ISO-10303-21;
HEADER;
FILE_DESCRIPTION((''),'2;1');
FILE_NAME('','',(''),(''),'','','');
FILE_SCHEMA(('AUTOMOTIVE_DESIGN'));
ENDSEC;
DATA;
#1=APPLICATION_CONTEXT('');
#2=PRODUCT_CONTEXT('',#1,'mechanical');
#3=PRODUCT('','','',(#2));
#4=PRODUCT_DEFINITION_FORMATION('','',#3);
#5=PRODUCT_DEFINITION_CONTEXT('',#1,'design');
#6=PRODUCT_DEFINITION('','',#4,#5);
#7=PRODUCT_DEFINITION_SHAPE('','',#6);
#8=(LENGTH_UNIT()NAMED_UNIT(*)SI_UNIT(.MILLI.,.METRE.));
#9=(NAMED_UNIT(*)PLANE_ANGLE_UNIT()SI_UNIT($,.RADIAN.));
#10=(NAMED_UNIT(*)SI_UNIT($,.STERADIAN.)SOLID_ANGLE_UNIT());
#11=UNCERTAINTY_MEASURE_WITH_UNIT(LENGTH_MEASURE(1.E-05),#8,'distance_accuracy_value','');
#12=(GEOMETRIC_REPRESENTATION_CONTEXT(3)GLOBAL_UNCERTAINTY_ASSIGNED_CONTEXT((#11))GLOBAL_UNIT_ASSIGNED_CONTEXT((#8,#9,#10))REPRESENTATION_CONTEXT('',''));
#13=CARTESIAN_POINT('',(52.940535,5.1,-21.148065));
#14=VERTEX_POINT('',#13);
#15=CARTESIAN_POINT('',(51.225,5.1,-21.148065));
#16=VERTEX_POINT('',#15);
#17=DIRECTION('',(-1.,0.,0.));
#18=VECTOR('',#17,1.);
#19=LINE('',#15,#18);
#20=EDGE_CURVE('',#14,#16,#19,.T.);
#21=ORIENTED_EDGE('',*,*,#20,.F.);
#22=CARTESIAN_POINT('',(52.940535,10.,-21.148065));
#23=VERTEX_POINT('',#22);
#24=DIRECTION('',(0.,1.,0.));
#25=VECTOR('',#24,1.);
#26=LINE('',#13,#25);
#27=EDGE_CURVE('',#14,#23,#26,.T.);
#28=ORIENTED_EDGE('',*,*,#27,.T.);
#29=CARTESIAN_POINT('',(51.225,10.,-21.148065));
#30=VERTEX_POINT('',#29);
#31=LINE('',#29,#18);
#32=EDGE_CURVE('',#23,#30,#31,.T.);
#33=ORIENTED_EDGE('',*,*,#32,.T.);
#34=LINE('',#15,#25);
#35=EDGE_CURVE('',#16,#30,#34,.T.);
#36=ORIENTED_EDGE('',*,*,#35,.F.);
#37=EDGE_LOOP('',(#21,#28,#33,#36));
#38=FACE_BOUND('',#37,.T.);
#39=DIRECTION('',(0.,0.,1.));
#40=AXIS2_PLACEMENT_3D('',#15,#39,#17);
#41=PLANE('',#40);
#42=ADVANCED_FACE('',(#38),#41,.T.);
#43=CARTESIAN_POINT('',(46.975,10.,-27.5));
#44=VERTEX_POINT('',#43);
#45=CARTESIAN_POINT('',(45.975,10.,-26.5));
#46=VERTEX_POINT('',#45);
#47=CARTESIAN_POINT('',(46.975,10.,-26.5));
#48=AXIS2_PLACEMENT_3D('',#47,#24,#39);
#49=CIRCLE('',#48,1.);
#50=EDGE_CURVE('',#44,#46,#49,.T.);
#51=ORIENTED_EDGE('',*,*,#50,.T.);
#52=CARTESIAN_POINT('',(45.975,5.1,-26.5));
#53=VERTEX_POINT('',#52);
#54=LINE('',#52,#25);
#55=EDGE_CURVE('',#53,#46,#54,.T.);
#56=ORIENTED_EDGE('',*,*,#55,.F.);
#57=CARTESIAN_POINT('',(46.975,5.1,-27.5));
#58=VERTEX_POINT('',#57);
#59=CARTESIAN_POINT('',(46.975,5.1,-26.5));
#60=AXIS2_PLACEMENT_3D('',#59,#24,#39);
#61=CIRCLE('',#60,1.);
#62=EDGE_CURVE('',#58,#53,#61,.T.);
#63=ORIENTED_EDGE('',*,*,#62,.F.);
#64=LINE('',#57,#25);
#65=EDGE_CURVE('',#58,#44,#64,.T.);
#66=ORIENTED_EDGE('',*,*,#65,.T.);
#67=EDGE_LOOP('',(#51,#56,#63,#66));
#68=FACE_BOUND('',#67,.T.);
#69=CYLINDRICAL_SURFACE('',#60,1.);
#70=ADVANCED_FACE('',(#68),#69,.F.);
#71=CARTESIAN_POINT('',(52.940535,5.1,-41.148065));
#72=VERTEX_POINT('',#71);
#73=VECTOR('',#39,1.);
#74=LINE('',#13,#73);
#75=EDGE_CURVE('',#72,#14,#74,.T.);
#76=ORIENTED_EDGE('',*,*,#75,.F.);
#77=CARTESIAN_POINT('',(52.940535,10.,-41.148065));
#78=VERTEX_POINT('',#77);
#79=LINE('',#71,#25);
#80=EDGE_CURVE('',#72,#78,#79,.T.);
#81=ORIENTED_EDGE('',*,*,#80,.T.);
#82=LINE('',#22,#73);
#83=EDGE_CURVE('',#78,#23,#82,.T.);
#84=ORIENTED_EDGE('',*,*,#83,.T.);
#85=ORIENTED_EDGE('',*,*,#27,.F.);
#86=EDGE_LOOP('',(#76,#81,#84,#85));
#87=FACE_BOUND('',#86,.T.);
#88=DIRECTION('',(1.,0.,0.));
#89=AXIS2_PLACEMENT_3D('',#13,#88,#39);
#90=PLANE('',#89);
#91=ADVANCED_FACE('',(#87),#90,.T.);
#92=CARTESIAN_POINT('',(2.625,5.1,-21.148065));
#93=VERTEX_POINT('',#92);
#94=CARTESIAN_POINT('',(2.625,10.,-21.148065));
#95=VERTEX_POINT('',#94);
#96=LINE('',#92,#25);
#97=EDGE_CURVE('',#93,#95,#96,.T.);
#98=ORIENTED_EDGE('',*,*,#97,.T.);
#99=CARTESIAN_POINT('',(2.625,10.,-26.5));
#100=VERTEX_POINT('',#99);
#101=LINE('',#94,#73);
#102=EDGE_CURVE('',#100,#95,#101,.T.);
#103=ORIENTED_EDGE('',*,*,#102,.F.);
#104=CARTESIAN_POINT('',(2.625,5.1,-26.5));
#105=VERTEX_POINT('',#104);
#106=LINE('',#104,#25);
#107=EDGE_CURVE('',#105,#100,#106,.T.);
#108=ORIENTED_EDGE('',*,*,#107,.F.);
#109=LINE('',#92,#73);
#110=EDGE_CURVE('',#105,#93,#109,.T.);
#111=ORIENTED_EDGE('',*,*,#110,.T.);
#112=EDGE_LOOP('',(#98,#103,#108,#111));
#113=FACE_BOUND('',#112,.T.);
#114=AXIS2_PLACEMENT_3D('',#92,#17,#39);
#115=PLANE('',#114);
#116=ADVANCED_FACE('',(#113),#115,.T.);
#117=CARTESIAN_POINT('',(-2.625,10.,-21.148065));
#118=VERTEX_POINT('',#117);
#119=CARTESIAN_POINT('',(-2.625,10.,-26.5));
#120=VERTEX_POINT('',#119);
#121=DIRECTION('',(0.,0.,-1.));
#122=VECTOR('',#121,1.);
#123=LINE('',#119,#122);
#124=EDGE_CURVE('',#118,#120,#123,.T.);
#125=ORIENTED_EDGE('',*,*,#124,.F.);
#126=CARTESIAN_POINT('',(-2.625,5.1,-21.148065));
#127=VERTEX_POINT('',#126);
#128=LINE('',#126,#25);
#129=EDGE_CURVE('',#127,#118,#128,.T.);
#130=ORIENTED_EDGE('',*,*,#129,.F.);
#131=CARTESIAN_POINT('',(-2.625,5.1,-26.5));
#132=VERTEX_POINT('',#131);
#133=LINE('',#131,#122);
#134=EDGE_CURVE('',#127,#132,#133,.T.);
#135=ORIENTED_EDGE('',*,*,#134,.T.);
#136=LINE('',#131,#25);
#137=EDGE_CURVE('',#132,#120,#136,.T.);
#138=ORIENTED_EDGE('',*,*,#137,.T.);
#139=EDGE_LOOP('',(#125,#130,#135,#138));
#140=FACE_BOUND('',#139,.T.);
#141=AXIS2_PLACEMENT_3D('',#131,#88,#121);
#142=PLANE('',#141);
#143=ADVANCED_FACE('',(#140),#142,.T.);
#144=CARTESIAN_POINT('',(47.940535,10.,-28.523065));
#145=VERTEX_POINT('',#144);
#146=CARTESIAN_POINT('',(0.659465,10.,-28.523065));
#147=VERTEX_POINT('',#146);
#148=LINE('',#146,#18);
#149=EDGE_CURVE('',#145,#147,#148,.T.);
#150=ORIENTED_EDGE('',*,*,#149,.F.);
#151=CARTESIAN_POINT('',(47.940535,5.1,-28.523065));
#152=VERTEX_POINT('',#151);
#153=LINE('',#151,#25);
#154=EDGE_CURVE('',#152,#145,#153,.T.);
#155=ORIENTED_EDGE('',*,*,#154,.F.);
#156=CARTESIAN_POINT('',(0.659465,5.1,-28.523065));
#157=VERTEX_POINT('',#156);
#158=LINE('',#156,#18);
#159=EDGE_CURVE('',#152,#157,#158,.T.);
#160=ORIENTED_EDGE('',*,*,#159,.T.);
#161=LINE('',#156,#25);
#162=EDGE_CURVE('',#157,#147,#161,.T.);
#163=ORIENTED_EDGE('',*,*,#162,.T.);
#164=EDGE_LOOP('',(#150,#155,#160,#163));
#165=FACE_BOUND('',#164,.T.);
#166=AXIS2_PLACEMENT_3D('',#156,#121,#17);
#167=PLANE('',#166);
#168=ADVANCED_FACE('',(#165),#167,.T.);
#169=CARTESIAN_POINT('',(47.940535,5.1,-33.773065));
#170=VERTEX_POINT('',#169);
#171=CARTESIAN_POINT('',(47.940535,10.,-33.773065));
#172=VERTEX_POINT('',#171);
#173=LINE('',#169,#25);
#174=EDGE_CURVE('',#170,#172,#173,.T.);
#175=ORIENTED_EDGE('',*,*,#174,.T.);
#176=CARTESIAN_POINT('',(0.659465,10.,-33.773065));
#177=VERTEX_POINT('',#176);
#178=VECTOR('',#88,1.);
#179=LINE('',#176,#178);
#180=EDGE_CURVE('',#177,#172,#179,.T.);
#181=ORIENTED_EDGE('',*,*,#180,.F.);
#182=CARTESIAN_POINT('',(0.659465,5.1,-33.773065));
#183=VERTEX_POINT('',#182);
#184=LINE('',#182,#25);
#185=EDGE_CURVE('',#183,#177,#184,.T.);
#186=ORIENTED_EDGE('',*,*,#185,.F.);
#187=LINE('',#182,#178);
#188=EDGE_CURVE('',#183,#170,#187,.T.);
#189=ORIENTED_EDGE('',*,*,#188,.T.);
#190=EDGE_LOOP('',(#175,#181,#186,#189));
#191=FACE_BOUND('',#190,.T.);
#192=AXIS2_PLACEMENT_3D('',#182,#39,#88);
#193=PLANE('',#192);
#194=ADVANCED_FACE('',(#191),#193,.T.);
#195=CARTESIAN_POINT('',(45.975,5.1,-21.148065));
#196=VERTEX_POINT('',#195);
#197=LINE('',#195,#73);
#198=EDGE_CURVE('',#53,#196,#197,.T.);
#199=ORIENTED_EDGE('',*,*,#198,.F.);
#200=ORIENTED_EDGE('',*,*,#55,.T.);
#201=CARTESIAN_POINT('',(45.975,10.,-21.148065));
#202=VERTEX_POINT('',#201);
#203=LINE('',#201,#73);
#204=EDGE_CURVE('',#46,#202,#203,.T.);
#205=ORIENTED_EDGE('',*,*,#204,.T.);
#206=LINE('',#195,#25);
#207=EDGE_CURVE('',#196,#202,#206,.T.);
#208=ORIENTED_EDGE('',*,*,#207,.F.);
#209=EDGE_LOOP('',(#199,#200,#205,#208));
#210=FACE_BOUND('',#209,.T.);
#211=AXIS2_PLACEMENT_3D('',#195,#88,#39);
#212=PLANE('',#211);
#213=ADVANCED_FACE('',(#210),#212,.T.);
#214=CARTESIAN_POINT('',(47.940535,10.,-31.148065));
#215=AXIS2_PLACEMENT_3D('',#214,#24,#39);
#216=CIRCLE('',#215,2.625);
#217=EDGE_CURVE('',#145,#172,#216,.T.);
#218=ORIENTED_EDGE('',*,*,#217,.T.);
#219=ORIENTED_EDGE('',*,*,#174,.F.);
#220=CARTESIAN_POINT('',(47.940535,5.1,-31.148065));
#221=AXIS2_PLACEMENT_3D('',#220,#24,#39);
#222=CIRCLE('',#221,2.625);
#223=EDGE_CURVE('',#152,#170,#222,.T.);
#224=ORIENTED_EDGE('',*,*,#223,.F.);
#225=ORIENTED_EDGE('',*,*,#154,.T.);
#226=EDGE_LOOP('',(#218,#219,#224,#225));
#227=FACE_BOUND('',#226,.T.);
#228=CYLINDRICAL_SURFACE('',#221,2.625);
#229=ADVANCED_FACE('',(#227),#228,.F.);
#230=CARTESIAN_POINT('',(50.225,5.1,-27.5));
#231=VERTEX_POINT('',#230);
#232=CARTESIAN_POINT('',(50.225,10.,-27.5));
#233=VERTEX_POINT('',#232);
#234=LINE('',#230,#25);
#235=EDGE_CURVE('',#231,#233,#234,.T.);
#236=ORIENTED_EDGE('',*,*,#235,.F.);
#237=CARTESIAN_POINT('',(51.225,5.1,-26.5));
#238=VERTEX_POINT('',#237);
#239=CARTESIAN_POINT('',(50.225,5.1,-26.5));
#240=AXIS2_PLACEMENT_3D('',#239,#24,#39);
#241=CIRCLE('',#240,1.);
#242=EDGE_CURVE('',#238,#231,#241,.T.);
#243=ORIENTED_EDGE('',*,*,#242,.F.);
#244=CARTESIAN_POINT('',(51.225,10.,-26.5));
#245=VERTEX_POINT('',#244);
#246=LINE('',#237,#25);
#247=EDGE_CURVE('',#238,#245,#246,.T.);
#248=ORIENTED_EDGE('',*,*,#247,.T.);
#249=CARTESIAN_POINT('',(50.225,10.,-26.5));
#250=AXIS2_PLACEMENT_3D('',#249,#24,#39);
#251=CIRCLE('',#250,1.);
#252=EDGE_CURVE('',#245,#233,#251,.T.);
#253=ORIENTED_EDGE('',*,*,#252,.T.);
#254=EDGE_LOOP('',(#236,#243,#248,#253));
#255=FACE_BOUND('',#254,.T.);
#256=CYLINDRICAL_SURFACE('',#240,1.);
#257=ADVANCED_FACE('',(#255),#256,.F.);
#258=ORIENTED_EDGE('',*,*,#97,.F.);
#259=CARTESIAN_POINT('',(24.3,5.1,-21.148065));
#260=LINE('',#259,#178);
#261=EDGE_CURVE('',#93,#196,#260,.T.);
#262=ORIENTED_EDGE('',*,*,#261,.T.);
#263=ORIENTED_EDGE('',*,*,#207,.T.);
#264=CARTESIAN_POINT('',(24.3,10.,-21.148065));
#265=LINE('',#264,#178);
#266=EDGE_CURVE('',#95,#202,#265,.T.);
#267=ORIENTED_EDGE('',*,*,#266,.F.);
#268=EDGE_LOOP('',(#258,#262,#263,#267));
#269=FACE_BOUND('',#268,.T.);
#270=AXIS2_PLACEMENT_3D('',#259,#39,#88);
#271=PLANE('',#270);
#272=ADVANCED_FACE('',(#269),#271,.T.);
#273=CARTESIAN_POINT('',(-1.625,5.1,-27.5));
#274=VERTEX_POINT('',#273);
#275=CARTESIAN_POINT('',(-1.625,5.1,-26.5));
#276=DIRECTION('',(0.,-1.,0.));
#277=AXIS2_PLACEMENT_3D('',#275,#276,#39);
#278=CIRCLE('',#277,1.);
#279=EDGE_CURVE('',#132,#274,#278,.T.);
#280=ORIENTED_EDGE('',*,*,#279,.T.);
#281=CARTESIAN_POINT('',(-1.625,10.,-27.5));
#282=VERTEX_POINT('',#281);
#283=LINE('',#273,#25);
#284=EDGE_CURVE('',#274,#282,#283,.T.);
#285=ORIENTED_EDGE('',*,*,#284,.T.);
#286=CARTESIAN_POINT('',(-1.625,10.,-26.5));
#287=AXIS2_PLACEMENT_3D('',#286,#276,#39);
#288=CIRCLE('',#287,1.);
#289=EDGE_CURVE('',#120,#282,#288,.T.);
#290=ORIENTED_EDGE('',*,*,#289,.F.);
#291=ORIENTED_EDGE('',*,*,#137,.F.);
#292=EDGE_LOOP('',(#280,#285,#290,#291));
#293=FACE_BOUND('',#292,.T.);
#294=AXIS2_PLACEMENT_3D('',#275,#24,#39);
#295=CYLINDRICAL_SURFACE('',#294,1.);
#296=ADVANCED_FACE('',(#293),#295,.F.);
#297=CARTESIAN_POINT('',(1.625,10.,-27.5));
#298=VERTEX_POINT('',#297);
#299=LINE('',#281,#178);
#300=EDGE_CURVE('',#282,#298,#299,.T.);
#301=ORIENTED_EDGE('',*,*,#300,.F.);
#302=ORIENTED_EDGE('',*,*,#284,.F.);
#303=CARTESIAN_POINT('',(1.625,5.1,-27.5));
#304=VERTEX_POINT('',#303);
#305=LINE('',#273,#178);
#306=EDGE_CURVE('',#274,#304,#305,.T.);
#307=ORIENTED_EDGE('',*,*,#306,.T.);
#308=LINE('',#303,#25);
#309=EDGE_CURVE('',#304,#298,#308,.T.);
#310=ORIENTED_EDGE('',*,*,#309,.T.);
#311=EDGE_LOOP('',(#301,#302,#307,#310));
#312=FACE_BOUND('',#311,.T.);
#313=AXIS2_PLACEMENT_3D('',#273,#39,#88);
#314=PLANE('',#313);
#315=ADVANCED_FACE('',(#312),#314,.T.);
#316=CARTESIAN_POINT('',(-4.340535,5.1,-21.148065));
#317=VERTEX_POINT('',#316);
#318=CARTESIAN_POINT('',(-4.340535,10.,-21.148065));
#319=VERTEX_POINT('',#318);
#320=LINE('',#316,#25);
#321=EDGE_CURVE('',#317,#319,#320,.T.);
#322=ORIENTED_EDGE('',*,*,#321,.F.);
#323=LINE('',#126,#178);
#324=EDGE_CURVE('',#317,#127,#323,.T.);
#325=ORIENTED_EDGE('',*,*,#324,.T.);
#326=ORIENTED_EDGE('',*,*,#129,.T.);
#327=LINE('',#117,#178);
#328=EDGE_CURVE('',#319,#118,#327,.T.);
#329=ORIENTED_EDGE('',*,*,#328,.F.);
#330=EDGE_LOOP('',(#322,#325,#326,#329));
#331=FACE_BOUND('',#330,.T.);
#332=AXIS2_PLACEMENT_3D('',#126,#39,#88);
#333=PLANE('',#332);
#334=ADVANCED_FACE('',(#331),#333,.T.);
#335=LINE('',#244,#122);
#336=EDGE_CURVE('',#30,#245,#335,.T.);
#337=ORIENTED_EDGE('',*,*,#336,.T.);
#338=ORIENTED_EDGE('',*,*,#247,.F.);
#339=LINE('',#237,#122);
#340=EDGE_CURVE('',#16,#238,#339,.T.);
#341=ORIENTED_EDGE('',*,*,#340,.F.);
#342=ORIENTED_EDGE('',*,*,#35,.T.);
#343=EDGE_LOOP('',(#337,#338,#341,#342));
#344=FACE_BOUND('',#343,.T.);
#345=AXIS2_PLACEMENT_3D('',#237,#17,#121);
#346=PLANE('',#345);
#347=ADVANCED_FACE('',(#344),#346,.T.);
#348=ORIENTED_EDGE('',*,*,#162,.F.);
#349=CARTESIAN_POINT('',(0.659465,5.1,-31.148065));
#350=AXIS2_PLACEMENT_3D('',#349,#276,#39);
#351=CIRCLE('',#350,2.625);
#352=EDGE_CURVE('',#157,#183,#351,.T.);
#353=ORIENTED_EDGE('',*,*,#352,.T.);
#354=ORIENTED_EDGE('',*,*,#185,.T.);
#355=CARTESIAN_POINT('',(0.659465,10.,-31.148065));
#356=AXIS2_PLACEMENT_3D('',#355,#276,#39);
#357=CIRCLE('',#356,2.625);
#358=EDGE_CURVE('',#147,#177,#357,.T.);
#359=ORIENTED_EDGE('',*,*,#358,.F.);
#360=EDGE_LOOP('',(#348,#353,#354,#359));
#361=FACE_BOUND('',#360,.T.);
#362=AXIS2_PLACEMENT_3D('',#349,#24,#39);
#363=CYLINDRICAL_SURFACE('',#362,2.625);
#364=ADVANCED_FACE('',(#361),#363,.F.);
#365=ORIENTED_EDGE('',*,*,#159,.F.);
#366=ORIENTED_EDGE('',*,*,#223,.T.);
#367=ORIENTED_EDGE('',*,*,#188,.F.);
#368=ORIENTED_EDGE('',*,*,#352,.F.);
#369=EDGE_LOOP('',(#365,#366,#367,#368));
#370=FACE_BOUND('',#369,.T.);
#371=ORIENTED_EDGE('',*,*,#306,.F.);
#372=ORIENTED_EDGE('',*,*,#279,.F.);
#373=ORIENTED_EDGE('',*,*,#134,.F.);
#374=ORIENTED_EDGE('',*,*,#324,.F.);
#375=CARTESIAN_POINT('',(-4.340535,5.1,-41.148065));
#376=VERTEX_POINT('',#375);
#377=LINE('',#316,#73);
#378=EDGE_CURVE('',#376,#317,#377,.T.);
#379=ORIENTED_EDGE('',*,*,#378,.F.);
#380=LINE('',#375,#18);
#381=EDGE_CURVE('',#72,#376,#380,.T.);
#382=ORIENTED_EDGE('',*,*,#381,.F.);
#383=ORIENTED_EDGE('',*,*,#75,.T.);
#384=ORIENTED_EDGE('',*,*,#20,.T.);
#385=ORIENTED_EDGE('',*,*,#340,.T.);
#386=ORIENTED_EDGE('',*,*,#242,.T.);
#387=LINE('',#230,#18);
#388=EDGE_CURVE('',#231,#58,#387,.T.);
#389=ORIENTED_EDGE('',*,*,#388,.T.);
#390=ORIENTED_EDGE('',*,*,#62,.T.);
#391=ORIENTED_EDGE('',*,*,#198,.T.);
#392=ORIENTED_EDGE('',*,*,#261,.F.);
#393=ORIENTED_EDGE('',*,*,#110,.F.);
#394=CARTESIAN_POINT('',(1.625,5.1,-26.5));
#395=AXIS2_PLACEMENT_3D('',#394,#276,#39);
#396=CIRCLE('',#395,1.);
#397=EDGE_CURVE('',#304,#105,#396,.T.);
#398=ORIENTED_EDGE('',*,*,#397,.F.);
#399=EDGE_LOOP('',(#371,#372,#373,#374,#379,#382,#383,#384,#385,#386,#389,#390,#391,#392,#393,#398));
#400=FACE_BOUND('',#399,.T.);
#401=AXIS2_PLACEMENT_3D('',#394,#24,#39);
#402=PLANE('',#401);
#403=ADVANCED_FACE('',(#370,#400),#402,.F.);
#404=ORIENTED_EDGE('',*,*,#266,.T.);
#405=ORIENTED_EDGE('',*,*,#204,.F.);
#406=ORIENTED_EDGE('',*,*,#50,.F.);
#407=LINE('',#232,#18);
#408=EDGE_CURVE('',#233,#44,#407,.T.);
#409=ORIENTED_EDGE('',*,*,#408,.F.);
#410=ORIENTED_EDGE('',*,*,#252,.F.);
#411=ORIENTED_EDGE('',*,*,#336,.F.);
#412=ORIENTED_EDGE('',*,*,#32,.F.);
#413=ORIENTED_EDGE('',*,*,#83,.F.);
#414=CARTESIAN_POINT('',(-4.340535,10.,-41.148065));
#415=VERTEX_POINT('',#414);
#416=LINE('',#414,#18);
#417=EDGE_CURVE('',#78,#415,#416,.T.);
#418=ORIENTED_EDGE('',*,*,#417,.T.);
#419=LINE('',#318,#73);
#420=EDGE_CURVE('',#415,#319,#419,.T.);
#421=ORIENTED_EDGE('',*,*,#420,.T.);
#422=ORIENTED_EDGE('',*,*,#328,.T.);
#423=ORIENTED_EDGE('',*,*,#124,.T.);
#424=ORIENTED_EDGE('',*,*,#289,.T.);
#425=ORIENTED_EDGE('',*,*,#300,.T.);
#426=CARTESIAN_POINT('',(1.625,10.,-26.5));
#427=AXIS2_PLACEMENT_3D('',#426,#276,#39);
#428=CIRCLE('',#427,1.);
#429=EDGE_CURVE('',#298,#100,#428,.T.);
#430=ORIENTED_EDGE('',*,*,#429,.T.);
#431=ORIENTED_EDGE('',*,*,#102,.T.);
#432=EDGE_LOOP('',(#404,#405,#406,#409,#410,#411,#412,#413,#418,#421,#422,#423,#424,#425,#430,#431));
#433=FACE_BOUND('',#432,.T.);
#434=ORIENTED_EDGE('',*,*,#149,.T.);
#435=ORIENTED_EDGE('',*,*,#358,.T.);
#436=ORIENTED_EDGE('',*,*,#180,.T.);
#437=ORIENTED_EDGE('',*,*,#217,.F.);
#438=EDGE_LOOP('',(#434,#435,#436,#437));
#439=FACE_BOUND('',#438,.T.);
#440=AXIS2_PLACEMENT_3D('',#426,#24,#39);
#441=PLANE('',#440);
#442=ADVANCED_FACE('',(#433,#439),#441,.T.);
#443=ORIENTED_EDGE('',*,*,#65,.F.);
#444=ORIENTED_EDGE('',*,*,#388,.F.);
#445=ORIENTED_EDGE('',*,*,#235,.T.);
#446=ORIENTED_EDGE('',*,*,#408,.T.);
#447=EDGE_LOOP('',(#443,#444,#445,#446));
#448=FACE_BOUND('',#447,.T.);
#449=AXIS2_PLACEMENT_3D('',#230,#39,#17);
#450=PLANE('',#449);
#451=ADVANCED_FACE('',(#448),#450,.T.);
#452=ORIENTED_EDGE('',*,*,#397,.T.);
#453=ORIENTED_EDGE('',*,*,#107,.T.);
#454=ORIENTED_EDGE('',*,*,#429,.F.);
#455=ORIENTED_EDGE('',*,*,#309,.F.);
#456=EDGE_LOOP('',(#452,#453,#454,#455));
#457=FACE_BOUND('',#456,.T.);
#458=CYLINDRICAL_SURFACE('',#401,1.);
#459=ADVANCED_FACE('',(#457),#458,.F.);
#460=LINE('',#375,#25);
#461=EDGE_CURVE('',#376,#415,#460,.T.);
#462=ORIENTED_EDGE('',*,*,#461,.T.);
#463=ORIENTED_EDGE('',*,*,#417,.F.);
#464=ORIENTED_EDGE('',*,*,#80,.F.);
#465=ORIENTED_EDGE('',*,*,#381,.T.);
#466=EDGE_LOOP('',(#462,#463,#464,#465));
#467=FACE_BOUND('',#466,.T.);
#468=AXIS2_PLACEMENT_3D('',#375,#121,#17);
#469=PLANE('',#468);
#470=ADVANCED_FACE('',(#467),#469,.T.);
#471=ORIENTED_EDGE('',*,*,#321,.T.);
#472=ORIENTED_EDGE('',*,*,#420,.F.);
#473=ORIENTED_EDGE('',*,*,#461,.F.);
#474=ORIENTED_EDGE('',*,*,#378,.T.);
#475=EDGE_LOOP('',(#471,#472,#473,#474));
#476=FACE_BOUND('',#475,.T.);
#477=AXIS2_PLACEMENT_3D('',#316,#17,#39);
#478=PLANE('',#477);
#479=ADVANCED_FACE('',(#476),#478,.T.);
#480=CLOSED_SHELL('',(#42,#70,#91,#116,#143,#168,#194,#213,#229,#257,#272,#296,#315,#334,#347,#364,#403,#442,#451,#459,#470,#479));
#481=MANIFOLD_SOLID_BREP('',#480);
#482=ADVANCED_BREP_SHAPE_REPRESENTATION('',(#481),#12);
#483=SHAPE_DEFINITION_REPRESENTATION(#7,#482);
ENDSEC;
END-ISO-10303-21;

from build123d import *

# Parameters (mm, degrees)
BOSS_EXTRUDE5_DEPTH   = 10
CUT_EXTRUDE6_DEPTH    = 5
FILLET4_R             = 1
FILLET4_OF_MIRROR25_R = 1
BOSS_EXTRUDE6_DEPTH   = 4.9
MIRROR27_START        = 5.1
MIRROR27_DEPTH        = 4.9


# Read off the part's stored shape, not the designer's step: Mirror27
with BuildPart() as part:
    # Sketch15 → Boss-Extrude5 (new body)
    with BuildSketch(Plane(origin=(0, 0, 0), x_dir=(1, 0, 0), z_dir=(0, 1, 0))):
        Polygon((24.3, 76.900659127), (-6.625, 76.900659127), (-6.625, -4.5), (24.3, -4.5), (24.3, 44.900659127), (21.675, 44.900659127), (21.675, 47.400659127), (21.675, 72.400659127), (21.675, 74.900659127), (24.3, 74.900659127), align=None)
        Polygon((-2.625, 25), (-2.625, 0), (-2.625, -2.5), (0, -2.5), (2.625, -2.5), (2.625, 0), (2.625, 25), (2.625, 27.5), (0, 27.5), (-2.625, 27.5), align=None, mode=Mode.SUBTRACT)
    boss_extrude5 = extrude(amount=BOSS_EXTRUDE5_DEPTH)

    # Sketch18 → Cut-Extrude6 (cut)
    with BuildSketch(Plane(origin=(0, 10, 0), x_dir=(1, 0, 0), z_dir=(0, 1, 0))):
        Polygon((21.675, 51.3980649), (-4.44053483, 51.3980649), (-4.44053483, 20.8980649), (24.3, 20.8980649), (24.3, 51.3980649), align=None)
    cut_extrude6 = extrude(amount=-CUT_EXTRUDE6_DEPTH, mode=Mode.SUBTRACT)

    # Fillet4
    fillet4_edges = [part.edges().sort_by_distance(p)[0] for p in [
        (21.675, 5, -74.900659127),
        (-2.625, 5, 2.5),
        (2.625, 5, 2.5),
        (2.625, 2.5, -27.5),
        (-2.625, 2.5, -27.5),
        (21.675, 2.5, -44.900659127),
    ]]
    fillet(fillet4_edges, radius=FILLET4_R)

    # Mirror25: Boss-Extrude5, Cut-Extrude6 across plane
    add(boss_extrude5.mirror(Plane(origin=(24.3, 10, 4.5), x_dir=(0, 0, 1), z_dir=(-1, 0, 0))))
    add(cut_extrude6.mirror(Plane(origin=(24.3, 10, 4.5), x_dir=(0, 0, 1), z_dir=(-1, 0, 0))), mode=Mode.SUBTRACT)

    # Fillet4 of Mirror25
    fillet4_of_mirror25_edges = [part.edges().sort_by_distance(p)[0] for p in [
        (26.925, 5, -74.900659127),
        (51.225, 5, 2.5),
        (45.975, 5, 2.5),
        (45.975, 2.5, -27.5),
        (51.225, 2.5, -27.5),
        (26.925, 2.5, -44.900659127),
    ]]
    fillet(fillet4_of_mirror25_edges, radius=FILLET4_OF_MIRROR25_R)


with BuildPart() as body_2:
    # Sketch19 → Boss-Extrude6 (new body)
    with BuildSketch(Plane(origin=(0, 10, 0), x_dir=(1, 0, 0), z_dir=(0, 1, 0))):
        with BuildLine():
            Line((2.625, 21.1480649), (2.625, 26.5))
            ThreePointArc((2.625, 26.5), (2.332106781, 27.207106781), (1.625, 27.5))
            Line((1.625, 27.5), (-1.625, 27.5))
            ThreePointArc((-1.625, 27.5), (-2.332106781, 27.207106781), (-2.625, 26.5))
            Line((-2.625, 26.5), (-2.625, 21.1480649))
            Line((-2.625, 21.1480649), (-4.34053483, 21.1480649))
            Line((-4.34053483, 21.1480649), (-4.34053483, 41.1480649))
            Line((-4.34053483, 41.1480649), (24.3, 41.1480649))
            Line((24.3, 41.1480649), (24.3, 33.7730649))
            Line((24.3, 33.7730649), (0.65946517, 33.7730649))
            ThreePointArc((0.65946517, 33.7730649), (-1.96553483, 31.1480649), (0.65946517, 28.5230649))
            Line((0.65946517, 28.5230649), (24.3, 28.5230649))
            Line((24.3, 28.5230649), (24.3, 21.1480649))
            Line((24.3, 21.1480649), (2.625, 21.1480649))
        make_face()
    extrude(amount=-BOSS_EXTRUDE6_DEPTH)

    # Mirror27 outline → Mirror27 (add)
    with BuildSketch(Plane(origin=(0, 0, 0), x_dir=(1, 0, 0), z_dir=(0, 1, 0)).offset(MIRROR27_START)):
        with BuildLine():
            ThreePointArc((45.975, 26.5), (46.267893219, 27.207106781), (46.975, 27.5))
            Line((46.975, 27.5), (50.225, 27.5))
            ThreePointArc((50.225, 27.5), (50.932106781, 27.207106781), (51.225, 26.5))
            Line((51.225, 26.5), (51.225, 21.1480649))
            Line((51.225, 21.1480649), (52.94053483, 21.1480649))
            Line((52.94053483, 21.1480649), (52.94053483, 41.1480649))
            Line((52.94053483, 41.1480649), (24.3, 41.1480649))
            Line((24.3, 41.1480649), (24.3, 33.7730649))
            Line((24.3, 33.7730649), (47.94053483, 33.7730649))
            ThreePointArc((47.94053483, 33.7730649), (50.56553483, 31.1480649), (47.94053483, 28.5230649))
            Line((47.94053483, 28.5230649), (24.3, 28.5230649))
            Line((24.3, 28.5230649), (24.3, 21.1480649))
            Line((24.3, 21.1480649), (45.975, 21.1480649))
            Line((45.975, 21.1480649), (45.975, 26.5))
        make_face()
    extrude(amount=MIRROR27_DEPTH)


solid = body_2.part
